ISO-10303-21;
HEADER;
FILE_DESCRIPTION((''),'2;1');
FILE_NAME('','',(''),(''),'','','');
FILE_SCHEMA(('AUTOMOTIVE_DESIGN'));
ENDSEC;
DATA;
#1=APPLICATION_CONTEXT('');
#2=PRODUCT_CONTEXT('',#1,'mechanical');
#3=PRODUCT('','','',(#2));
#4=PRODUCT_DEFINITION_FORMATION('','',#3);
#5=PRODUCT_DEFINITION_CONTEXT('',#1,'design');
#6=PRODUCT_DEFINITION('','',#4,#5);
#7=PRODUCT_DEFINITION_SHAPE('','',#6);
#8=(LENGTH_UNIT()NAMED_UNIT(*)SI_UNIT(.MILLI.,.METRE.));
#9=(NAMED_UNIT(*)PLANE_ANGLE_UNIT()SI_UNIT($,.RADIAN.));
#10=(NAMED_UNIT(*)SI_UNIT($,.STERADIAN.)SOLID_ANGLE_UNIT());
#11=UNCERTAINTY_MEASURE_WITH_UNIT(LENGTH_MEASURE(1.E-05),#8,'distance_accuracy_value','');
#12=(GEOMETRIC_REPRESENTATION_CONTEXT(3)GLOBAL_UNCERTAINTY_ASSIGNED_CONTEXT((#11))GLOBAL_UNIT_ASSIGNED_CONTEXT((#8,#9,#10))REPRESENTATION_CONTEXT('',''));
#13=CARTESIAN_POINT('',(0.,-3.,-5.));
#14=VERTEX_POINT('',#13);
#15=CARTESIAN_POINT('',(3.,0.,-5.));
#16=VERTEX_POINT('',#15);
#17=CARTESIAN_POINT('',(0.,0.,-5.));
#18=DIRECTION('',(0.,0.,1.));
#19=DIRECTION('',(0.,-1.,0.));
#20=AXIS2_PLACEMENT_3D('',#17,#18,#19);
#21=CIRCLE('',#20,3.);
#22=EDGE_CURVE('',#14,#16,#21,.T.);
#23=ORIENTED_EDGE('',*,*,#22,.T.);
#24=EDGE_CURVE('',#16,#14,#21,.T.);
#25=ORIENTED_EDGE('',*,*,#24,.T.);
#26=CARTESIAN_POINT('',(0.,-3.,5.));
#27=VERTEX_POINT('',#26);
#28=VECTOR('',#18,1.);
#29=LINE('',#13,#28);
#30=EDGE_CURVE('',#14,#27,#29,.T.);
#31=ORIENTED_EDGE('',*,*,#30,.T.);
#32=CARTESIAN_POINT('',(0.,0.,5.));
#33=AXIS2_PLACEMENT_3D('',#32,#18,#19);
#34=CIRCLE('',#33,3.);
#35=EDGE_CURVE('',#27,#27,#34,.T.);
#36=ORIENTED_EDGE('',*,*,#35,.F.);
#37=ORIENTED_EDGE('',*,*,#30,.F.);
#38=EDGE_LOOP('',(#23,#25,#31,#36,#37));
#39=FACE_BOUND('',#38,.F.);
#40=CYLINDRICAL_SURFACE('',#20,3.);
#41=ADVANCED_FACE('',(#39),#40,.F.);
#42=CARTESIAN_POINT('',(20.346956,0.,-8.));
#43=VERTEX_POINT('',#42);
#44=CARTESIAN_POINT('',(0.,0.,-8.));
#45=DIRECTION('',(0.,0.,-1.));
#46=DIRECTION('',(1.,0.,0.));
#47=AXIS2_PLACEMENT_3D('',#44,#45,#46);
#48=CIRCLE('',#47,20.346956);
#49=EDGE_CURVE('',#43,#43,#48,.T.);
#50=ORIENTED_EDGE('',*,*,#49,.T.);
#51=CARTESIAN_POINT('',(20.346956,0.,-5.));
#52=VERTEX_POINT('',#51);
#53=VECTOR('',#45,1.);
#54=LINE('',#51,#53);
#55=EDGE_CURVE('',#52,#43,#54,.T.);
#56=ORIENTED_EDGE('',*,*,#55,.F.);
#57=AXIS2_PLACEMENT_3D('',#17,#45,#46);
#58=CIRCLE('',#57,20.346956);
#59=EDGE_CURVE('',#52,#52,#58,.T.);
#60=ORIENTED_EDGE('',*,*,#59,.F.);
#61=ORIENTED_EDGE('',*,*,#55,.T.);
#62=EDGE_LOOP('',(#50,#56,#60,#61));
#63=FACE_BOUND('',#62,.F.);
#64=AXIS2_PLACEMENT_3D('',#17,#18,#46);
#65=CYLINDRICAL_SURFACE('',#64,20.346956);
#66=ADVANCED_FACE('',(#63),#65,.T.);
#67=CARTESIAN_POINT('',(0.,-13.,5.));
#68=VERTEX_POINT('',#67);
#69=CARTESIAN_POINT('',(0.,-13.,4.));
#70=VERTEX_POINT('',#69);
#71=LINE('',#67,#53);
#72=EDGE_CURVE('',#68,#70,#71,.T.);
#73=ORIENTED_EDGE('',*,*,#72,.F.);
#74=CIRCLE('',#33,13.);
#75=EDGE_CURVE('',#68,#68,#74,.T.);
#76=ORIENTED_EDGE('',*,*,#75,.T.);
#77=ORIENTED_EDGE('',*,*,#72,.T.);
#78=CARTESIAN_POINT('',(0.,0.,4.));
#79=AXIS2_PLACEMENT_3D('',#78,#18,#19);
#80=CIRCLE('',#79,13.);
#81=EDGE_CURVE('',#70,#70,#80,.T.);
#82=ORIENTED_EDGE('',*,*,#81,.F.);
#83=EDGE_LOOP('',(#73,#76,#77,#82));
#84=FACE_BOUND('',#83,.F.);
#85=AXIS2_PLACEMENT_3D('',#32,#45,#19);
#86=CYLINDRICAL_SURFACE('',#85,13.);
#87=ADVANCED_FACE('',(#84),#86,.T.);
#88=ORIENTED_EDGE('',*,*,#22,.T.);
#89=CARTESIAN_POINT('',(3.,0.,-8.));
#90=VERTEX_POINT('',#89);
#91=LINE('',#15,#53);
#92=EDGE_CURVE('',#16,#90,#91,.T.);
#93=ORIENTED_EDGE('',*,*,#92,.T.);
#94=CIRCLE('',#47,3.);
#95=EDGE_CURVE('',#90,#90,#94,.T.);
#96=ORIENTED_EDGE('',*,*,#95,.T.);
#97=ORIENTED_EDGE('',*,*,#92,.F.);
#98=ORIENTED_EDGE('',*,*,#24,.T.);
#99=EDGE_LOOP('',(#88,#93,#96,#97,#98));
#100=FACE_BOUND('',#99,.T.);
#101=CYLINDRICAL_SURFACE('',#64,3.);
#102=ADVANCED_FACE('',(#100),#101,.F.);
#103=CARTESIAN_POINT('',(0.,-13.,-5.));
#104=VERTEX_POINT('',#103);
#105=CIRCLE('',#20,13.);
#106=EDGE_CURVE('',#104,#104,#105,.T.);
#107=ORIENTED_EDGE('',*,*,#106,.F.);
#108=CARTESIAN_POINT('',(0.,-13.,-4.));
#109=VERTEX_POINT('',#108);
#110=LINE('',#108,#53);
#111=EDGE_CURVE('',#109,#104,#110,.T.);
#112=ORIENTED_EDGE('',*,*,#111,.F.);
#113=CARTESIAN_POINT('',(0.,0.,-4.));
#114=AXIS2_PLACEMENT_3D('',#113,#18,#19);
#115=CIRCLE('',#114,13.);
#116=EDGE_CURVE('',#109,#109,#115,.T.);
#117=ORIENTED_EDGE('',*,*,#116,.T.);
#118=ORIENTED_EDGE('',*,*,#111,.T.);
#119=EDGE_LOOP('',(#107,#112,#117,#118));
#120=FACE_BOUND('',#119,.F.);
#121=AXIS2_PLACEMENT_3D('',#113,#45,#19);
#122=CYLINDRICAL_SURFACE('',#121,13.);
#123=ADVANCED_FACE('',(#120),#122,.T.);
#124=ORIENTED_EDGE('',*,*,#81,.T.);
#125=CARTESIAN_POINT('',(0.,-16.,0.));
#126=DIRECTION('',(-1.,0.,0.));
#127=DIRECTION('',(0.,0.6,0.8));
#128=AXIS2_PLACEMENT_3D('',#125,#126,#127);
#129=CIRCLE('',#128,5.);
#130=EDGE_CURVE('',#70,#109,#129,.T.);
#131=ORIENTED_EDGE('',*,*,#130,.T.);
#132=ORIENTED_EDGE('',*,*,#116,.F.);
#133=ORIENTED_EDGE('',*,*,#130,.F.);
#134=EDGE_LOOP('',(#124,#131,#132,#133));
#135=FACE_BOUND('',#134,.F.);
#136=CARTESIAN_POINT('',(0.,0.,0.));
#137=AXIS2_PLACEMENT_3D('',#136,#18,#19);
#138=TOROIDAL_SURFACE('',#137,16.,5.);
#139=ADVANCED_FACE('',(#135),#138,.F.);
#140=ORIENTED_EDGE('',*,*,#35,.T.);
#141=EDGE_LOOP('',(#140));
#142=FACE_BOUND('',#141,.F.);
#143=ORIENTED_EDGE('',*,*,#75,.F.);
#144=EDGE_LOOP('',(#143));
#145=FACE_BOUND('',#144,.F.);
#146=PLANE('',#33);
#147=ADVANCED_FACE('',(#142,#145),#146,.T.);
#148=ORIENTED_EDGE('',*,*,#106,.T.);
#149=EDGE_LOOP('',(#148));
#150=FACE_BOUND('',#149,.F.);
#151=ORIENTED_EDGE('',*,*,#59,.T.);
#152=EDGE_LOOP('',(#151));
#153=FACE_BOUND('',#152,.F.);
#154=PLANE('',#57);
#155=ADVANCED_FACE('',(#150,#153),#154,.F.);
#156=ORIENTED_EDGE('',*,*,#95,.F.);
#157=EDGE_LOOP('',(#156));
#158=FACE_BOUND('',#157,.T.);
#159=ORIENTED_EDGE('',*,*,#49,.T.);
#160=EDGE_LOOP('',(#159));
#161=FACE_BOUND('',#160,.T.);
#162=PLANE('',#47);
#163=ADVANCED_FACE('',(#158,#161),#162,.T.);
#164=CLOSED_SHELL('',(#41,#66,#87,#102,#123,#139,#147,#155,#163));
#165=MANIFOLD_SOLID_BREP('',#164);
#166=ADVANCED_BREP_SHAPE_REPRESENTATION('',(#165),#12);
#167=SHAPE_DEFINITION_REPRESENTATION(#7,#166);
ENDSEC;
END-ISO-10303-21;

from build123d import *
from build123d import SkipClean  # not in build123d's __all__

# Parameters (mm, degrees)
F2_R     = 20.3469556015
F2_R_2   = 13
F2_R_3   = 3
F3_DEPTH = 3


with BuildPart() as f1:
    # F0 (on Right) → F1 (revolve)
    with BuildSketch(Plane.YZ):
        with BuildLine():
            Line((-3, -5), (-3, 0))
            Line((-3, 0), (-3, 5))
            Line((-3, 5), (-13, 5))
            Line((-13, 5), (-13, 4))
            ThreePointArc((-13, 4), (-11, 0), (-13, -4))
            Line((-13, -4), (-13, -5))
            Line((-13, -5), (-3, -5))
        make_face()
    revolve(axis=Axis((0, 0, 3.2237173374), (0, 0, 1)))

    # F2 (on face) → F3 (join)
    with BuildSketch(Plane(origin=(0, 0, -5), x_dir=(1, 0, 0), z_dir=(0, 0, -1))):
        Circle(F2_R)
        Circle(F2_R_2, mode=Mode.SUBTRACT)
        Circle(F2_R_2)
        Circle(F2_R_3, mode=Mode.SUBTRACT)
    with SkipClean():  # cleaning this boolean's faces spoils the solid; the shape is the same uncleaned
        extrude(amount=F3_DEPTH)


solid = f1.part
